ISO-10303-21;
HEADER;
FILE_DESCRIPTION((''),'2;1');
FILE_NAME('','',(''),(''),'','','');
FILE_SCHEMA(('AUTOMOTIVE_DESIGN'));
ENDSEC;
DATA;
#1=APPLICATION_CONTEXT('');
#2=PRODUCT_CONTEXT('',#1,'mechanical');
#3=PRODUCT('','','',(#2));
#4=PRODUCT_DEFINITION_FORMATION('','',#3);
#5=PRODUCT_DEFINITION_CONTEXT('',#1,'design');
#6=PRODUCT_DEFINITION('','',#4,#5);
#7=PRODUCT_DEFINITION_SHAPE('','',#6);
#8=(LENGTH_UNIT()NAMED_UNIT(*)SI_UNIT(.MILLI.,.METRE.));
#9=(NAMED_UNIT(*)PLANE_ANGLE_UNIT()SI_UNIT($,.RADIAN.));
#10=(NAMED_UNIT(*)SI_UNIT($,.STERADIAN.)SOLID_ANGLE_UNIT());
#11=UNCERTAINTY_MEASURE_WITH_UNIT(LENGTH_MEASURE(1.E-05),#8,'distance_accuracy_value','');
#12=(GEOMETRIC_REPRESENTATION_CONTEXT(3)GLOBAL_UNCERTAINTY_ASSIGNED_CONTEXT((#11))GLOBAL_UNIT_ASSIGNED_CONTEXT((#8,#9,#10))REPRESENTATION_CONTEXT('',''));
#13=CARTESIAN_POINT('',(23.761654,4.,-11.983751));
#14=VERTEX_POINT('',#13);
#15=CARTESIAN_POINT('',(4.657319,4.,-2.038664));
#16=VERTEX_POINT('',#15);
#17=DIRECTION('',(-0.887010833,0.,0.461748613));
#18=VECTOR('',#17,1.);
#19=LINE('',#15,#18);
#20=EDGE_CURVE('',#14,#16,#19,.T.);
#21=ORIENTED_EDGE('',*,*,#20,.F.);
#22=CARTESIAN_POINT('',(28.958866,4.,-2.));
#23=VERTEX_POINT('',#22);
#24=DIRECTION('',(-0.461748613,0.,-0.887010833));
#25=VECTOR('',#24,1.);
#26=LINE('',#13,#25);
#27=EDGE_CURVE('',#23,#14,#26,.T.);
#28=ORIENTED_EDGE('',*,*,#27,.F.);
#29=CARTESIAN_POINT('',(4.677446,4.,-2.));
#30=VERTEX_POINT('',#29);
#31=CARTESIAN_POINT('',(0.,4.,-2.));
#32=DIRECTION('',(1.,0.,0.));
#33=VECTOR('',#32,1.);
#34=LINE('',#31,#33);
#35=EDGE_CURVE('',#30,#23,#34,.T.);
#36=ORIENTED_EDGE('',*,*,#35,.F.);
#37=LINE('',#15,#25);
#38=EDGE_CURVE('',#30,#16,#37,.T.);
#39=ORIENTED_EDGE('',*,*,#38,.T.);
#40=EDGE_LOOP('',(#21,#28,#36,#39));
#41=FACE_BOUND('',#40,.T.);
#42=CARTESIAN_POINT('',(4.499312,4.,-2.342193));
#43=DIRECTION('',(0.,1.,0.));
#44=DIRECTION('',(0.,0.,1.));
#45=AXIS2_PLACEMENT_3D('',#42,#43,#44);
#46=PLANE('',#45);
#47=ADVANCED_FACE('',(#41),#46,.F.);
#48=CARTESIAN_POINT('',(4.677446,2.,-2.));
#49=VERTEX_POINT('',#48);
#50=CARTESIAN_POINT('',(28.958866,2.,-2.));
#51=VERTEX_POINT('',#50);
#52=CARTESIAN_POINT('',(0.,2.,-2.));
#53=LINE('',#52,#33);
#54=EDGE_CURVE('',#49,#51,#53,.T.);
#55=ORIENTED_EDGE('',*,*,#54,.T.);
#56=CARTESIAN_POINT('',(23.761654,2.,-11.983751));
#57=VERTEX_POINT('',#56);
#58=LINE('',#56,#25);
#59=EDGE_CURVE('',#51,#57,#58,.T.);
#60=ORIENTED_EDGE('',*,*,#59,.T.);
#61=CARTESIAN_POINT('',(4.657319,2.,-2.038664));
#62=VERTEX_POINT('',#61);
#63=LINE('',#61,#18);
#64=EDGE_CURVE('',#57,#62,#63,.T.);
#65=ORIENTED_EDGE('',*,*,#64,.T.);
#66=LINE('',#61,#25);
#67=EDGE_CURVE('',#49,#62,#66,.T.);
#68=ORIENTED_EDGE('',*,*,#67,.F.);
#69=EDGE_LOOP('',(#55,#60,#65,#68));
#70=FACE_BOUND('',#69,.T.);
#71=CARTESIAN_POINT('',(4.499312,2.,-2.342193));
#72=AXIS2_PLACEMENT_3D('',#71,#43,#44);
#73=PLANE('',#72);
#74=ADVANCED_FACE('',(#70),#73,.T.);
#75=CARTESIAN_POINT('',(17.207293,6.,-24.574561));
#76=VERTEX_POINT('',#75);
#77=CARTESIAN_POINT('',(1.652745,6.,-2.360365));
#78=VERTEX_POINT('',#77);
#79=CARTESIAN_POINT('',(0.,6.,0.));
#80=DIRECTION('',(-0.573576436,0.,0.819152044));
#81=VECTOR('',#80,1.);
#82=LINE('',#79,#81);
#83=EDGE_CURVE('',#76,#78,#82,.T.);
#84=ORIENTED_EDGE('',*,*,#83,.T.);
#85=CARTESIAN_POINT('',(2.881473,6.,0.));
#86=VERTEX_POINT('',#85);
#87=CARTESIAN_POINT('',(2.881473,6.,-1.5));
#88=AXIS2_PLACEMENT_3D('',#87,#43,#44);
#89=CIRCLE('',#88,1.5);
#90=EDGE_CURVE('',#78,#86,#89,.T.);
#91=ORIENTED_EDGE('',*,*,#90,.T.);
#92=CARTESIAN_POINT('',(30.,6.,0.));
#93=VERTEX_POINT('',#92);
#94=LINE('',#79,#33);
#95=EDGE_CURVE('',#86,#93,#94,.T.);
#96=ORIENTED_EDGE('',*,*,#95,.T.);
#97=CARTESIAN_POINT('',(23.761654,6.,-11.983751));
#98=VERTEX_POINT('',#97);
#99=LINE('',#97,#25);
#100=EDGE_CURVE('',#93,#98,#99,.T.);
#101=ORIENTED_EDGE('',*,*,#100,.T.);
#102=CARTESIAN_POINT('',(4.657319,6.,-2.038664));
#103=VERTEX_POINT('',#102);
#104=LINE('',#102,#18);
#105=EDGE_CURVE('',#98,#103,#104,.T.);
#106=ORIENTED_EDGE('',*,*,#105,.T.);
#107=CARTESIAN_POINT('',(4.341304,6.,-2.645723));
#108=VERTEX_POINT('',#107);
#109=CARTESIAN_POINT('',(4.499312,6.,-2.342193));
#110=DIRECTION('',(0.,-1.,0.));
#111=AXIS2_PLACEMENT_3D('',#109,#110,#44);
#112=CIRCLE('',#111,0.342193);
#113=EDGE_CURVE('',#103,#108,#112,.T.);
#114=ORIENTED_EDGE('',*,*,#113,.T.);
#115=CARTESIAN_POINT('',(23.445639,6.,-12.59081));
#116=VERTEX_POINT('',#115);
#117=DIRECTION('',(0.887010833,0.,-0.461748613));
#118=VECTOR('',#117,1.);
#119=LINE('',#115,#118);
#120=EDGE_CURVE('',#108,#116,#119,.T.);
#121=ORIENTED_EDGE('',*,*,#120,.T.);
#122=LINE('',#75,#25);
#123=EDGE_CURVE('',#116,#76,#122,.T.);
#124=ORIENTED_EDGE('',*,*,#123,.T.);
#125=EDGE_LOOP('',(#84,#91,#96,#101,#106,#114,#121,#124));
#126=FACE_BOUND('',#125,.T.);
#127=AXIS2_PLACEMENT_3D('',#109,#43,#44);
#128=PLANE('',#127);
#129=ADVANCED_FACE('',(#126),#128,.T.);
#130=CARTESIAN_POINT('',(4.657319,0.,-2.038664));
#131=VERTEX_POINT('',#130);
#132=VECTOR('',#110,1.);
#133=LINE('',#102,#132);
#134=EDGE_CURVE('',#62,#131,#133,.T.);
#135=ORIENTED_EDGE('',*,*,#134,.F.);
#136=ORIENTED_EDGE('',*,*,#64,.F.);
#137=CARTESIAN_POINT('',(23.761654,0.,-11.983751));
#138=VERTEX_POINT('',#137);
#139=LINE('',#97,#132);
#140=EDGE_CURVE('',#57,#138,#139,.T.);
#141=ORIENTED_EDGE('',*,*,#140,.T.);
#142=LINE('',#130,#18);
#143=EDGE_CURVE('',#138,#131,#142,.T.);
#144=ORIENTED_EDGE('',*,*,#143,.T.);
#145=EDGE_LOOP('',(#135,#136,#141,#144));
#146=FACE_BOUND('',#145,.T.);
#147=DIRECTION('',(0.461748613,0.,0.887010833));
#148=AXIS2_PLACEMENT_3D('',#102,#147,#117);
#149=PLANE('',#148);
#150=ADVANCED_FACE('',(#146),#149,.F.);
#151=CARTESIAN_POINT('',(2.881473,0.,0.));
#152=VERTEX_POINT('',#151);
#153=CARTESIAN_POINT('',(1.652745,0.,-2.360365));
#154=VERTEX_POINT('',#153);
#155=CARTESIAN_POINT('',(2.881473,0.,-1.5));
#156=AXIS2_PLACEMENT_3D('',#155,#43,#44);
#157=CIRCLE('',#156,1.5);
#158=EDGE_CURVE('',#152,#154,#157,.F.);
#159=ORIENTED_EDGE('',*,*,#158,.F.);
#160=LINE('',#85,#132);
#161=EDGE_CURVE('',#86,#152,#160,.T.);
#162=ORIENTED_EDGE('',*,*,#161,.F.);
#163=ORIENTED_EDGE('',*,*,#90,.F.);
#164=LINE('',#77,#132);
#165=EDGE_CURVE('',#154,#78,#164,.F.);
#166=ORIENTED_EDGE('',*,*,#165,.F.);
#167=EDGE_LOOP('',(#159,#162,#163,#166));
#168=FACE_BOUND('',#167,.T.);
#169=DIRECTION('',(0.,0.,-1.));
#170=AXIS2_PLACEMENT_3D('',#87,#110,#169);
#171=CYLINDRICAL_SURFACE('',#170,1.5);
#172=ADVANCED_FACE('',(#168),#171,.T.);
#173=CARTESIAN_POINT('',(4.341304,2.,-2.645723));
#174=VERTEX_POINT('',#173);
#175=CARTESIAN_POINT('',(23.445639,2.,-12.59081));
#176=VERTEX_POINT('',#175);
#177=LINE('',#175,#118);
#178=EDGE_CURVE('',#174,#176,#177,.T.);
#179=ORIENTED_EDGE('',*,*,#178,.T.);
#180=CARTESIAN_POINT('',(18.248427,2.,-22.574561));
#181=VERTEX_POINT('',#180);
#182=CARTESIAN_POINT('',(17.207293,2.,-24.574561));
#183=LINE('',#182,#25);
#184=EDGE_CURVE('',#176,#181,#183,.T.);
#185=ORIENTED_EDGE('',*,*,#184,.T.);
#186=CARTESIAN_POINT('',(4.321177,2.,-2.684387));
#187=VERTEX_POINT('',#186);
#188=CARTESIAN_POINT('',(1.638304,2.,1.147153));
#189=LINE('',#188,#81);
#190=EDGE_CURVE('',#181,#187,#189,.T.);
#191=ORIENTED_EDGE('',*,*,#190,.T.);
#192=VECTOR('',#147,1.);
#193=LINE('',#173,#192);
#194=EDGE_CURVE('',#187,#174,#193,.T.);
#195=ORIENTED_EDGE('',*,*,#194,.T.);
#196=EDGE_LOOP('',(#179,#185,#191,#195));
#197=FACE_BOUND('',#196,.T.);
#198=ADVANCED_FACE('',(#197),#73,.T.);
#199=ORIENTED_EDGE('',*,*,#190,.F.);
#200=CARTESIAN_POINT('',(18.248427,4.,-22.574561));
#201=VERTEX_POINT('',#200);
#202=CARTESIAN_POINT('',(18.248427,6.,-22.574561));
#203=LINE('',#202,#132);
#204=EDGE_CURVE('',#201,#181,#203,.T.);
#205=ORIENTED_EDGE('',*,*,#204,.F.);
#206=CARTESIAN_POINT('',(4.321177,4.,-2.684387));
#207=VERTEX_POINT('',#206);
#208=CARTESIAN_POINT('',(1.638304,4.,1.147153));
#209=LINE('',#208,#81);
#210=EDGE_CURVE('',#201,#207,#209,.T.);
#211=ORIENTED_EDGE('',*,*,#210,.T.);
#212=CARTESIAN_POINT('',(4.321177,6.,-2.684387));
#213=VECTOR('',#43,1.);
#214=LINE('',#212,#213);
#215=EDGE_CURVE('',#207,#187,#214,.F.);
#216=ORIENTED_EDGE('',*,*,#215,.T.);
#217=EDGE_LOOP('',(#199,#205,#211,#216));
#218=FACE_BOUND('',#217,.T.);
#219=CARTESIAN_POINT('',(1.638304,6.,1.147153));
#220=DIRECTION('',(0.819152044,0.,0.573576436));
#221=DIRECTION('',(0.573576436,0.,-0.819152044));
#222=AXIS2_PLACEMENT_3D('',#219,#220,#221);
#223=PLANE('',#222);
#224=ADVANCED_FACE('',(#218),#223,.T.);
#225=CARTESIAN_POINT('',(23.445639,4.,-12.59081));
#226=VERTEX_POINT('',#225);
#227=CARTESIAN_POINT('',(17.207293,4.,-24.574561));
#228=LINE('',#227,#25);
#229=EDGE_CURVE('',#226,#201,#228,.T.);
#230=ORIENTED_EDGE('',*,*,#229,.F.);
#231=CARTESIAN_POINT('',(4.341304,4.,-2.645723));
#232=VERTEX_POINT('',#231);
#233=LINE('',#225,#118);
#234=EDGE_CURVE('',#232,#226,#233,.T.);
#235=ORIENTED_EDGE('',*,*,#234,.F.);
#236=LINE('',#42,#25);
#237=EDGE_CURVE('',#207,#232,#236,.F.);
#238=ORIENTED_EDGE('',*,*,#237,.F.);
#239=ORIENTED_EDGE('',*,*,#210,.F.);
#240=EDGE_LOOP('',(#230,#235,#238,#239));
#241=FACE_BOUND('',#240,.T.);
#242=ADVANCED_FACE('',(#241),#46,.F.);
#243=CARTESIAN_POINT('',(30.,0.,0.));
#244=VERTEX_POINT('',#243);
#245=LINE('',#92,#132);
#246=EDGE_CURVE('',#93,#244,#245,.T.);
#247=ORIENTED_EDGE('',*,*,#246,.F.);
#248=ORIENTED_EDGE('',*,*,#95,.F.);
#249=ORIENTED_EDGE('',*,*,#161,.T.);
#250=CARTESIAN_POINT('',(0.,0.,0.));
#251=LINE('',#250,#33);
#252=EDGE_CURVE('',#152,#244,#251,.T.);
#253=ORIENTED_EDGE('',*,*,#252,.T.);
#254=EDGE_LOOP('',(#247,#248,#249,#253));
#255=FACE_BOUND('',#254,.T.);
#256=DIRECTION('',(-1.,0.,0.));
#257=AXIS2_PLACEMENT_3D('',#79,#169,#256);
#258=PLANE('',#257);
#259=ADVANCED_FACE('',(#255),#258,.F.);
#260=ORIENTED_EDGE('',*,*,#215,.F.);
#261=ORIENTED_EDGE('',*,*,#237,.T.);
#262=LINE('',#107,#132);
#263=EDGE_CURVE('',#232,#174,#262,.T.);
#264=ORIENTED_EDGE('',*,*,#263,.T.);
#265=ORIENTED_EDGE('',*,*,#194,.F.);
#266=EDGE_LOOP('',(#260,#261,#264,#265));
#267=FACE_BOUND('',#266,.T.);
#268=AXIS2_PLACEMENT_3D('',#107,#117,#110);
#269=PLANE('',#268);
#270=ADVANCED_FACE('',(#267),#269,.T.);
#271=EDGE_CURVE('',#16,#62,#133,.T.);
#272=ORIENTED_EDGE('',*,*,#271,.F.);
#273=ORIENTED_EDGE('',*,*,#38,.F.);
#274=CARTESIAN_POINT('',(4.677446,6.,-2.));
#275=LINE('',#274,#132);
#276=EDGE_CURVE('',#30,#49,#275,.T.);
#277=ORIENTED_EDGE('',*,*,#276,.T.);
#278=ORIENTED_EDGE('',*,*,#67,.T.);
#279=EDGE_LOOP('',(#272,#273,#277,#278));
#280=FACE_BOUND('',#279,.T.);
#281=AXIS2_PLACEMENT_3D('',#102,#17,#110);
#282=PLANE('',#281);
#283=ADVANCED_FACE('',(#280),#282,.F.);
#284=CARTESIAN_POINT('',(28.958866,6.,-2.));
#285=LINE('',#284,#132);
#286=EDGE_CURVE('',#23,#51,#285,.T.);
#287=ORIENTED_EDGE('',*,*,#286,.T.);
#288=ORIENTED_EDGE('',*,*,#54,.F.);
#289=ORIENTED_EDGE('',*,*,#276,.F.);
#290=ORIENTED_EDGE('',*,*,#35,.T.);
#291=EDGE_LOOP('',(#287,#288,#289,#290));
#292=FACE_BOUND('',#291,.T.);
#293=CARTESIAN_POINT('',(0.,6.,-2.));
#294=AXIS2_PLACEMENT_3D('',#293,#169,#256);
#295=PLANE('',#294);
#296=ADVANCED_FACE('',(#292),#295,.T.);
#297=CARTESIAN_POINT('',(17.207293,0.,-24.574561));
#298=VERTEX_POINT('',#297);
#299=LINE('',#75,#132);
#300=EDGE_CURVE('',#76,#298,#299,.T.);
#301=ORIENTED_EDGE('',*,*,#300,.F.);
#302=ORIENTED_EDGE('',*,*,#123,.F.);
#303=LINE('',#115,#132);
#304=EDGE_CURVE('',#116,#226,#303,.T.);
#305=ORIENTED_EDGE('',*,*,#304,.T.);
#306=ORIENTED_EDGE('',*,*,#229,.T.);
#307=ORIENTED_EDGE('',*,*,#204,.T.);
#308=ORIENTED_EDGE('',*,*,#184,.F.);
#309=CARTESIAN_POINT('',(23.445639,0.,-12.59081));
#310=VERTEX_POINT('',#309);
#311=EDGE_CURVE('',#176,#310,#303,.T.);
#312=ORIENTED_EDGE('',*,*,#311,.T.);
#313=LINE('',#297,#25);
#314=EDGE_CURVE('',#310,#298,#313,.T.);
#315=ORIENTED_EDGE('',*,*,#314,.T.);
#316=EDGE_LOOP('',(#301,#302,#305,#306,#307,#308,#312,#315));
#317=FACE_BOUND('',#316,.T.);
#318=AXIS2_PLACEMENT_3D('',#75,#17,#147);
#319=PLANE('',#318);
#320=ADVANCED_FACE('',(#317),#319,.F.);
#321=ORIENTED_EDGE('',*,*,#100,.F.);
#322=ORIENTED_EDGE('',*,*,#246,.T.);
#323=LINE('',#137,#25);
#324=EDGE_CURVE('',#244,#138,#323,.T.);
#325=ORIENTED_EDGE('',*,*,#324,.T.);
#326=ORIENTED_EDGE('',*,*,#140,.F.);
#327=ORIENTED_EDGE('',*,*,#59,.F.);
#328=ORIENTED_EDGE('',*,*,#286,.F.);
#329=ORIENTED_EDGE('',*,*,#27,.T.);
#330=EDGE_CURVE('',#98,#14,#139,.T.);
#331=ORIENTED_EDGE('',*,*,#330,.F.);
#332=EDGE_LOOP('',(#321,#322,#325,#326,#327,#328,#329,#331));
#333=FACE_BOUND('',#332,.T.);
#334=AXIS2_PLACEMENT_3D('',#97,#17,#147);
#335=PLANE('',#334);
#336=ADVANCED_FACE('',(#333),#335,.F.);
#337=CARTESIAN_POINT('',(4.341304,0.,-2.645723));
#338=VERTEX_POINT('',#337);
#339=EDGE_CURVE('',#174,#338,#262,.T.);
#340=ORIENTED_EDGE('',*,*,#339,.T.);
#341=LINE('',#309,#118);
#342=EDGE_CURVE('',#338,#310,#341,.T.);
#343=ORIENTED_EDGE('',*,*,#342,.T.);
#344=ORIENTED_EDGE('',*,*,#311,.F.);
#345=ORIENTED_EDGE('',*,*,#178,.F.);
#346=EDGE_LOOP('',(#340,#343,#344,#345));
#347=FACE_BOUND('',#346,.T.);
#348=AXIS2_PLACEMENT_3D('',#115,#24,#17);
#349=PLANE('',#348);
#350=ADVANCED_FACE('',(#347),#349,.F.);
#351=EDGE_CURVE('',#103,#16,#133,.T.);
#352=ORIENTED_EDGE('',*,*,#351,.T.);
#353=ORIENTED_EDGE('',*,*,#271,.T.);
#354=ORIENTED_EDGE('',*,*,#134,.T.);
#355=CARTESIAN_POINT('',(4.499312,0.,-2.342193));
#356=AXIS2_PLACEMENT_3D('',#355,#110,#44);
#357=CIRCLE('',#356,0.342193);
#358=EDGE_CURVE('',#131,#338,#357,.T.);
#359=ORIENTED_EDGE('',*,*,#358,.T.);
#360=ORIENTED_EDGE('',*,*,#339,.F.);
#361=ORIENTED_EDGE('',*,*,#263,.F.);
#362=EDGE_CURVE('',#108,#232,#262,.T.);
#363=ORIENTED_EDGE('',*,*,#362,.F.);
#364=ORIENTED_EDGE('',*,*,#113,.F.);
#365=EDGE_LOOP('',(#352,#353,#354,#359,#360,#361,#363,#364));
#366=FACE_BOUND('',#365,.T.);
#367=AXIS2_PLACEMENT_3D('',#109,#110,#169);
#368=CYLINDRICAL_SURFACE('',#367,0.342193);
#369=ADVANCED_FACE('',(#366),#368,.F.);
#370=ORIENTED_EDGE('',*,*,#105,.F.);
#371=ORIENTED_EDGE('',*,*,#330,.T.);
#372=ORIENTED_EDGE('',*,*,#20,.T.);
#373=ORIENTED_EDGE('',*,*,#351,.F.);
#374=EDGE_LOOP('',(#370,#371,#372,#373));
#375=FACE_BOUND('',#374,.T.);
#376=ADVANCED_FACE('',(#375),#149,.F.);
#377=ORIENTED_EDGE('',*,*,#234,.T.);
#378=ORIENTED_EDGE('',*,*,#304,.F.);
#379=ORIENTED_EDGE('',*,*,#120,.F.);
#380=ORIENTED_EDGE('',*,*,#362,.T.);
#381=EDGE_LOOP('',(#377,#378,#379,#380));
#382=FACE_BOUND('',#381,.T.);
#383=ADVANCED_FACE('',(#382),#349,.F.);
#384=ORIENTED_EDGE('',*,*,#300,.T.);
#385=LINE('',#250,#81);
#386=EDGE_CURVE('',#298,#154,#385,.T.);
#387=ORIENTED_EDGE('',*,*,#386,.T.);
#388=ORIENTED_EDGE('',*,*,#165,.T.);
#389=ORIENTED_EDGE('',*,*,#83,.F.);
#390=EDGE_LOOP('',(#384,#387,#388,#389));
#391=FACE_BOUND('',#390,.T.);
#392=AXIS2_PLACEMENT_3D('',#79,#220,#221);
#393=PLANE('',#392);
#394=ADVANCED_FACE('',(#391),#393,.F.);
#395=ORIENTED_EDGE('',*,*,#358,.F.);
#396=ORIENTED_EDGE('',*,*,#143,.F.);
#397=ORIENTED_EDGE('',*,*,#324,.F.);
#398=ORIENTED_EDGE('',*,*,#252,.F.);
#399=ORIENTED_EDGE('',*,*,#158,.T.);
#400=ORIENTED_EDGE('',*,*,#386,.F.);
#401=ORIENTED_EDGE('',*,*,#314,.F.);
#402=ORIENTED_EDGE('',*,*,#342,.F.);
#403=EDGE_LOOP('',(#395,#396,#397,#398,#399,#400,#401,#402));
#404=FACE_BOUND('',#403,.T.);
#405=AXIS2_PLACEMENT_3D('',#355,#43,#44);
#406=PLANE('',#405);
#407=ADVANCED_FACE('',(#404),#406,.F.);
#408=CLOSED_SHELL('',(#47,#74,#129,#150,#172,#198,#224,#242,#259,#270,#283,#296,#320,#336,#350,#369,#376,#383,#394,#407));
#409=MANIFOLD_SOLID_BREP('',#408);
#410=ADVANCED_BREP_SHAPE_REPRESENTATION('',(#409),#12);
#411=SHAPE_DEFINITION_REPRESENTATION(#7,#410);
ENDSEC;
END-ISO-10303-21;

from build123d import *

# Parameters (mm, degrees)
BOSS_EXTRUDE1_DEPTH = 6
SHELL1_START        = 2
SHELL1_DEPTH        = 2
FILLET1_R           = 1.5


# Read off the part's stored shape, not the designer's step: Shell1
with BuildPart() as part:
    # Sketch1 → Boss-Extrude1 (new body)
    with BuildSketch(Plane(origin=(0, 0, 0), x_dir=(1, 0, 0), z_dir=(0, 1, 0))):
        with BuildLine():
            Line((0, 0), (17.207293091, 24.574561329))
            Line((17.207293091, 24.574561329), (23.445639192, 12.590809966))
            Line((23.445639192, 12.590809966), (4.341304412, 2.645722757))
            ThreePointArc((4.341304412, 2.645722757), (4.195782463, 2.184186102), (4.657319118, 2.038664153))
            Line((4.657319118, 2.038664153), (23.761653899, 11.983751363))
            Line((23.761653899, 11.983751363), (30, 0))
            Line((30, 0), (0, 0))
        make_face()
    extrude(amount=BOSS_EXTRUDE1_DEPTH)

    # Shell1 outline → Shell1 (cut)
    with BuildSketch(Plane(origin=(0, 0, 0), x_dir=(1, 0, 0), z_dir=(0, 1, 0)).offset(SHELL1_START)):
        Polygon((4.321177127, 2.68438691), (4.341304412, 2.645722757), (23.445639192, 12.590809966), (18.248427192, 22.574561329), align=None)
        Polygon((23.761653899, 11.983751363), (4.657319118, 2.038664153), (4.677446402, 2), (28.958865899, 2), align=None)
    extrude(amount=SHELL1_DEPTH, mode=Mode.SUBTRACT)

    # Fillet1
    fillet1_edges = [part.edges().sort_by_distance(p)[0] for p in [
        (0, 3, 0),
    ]]
    fillet(fillet1_edges, radius=FILLET1_R)


solid = part.part
